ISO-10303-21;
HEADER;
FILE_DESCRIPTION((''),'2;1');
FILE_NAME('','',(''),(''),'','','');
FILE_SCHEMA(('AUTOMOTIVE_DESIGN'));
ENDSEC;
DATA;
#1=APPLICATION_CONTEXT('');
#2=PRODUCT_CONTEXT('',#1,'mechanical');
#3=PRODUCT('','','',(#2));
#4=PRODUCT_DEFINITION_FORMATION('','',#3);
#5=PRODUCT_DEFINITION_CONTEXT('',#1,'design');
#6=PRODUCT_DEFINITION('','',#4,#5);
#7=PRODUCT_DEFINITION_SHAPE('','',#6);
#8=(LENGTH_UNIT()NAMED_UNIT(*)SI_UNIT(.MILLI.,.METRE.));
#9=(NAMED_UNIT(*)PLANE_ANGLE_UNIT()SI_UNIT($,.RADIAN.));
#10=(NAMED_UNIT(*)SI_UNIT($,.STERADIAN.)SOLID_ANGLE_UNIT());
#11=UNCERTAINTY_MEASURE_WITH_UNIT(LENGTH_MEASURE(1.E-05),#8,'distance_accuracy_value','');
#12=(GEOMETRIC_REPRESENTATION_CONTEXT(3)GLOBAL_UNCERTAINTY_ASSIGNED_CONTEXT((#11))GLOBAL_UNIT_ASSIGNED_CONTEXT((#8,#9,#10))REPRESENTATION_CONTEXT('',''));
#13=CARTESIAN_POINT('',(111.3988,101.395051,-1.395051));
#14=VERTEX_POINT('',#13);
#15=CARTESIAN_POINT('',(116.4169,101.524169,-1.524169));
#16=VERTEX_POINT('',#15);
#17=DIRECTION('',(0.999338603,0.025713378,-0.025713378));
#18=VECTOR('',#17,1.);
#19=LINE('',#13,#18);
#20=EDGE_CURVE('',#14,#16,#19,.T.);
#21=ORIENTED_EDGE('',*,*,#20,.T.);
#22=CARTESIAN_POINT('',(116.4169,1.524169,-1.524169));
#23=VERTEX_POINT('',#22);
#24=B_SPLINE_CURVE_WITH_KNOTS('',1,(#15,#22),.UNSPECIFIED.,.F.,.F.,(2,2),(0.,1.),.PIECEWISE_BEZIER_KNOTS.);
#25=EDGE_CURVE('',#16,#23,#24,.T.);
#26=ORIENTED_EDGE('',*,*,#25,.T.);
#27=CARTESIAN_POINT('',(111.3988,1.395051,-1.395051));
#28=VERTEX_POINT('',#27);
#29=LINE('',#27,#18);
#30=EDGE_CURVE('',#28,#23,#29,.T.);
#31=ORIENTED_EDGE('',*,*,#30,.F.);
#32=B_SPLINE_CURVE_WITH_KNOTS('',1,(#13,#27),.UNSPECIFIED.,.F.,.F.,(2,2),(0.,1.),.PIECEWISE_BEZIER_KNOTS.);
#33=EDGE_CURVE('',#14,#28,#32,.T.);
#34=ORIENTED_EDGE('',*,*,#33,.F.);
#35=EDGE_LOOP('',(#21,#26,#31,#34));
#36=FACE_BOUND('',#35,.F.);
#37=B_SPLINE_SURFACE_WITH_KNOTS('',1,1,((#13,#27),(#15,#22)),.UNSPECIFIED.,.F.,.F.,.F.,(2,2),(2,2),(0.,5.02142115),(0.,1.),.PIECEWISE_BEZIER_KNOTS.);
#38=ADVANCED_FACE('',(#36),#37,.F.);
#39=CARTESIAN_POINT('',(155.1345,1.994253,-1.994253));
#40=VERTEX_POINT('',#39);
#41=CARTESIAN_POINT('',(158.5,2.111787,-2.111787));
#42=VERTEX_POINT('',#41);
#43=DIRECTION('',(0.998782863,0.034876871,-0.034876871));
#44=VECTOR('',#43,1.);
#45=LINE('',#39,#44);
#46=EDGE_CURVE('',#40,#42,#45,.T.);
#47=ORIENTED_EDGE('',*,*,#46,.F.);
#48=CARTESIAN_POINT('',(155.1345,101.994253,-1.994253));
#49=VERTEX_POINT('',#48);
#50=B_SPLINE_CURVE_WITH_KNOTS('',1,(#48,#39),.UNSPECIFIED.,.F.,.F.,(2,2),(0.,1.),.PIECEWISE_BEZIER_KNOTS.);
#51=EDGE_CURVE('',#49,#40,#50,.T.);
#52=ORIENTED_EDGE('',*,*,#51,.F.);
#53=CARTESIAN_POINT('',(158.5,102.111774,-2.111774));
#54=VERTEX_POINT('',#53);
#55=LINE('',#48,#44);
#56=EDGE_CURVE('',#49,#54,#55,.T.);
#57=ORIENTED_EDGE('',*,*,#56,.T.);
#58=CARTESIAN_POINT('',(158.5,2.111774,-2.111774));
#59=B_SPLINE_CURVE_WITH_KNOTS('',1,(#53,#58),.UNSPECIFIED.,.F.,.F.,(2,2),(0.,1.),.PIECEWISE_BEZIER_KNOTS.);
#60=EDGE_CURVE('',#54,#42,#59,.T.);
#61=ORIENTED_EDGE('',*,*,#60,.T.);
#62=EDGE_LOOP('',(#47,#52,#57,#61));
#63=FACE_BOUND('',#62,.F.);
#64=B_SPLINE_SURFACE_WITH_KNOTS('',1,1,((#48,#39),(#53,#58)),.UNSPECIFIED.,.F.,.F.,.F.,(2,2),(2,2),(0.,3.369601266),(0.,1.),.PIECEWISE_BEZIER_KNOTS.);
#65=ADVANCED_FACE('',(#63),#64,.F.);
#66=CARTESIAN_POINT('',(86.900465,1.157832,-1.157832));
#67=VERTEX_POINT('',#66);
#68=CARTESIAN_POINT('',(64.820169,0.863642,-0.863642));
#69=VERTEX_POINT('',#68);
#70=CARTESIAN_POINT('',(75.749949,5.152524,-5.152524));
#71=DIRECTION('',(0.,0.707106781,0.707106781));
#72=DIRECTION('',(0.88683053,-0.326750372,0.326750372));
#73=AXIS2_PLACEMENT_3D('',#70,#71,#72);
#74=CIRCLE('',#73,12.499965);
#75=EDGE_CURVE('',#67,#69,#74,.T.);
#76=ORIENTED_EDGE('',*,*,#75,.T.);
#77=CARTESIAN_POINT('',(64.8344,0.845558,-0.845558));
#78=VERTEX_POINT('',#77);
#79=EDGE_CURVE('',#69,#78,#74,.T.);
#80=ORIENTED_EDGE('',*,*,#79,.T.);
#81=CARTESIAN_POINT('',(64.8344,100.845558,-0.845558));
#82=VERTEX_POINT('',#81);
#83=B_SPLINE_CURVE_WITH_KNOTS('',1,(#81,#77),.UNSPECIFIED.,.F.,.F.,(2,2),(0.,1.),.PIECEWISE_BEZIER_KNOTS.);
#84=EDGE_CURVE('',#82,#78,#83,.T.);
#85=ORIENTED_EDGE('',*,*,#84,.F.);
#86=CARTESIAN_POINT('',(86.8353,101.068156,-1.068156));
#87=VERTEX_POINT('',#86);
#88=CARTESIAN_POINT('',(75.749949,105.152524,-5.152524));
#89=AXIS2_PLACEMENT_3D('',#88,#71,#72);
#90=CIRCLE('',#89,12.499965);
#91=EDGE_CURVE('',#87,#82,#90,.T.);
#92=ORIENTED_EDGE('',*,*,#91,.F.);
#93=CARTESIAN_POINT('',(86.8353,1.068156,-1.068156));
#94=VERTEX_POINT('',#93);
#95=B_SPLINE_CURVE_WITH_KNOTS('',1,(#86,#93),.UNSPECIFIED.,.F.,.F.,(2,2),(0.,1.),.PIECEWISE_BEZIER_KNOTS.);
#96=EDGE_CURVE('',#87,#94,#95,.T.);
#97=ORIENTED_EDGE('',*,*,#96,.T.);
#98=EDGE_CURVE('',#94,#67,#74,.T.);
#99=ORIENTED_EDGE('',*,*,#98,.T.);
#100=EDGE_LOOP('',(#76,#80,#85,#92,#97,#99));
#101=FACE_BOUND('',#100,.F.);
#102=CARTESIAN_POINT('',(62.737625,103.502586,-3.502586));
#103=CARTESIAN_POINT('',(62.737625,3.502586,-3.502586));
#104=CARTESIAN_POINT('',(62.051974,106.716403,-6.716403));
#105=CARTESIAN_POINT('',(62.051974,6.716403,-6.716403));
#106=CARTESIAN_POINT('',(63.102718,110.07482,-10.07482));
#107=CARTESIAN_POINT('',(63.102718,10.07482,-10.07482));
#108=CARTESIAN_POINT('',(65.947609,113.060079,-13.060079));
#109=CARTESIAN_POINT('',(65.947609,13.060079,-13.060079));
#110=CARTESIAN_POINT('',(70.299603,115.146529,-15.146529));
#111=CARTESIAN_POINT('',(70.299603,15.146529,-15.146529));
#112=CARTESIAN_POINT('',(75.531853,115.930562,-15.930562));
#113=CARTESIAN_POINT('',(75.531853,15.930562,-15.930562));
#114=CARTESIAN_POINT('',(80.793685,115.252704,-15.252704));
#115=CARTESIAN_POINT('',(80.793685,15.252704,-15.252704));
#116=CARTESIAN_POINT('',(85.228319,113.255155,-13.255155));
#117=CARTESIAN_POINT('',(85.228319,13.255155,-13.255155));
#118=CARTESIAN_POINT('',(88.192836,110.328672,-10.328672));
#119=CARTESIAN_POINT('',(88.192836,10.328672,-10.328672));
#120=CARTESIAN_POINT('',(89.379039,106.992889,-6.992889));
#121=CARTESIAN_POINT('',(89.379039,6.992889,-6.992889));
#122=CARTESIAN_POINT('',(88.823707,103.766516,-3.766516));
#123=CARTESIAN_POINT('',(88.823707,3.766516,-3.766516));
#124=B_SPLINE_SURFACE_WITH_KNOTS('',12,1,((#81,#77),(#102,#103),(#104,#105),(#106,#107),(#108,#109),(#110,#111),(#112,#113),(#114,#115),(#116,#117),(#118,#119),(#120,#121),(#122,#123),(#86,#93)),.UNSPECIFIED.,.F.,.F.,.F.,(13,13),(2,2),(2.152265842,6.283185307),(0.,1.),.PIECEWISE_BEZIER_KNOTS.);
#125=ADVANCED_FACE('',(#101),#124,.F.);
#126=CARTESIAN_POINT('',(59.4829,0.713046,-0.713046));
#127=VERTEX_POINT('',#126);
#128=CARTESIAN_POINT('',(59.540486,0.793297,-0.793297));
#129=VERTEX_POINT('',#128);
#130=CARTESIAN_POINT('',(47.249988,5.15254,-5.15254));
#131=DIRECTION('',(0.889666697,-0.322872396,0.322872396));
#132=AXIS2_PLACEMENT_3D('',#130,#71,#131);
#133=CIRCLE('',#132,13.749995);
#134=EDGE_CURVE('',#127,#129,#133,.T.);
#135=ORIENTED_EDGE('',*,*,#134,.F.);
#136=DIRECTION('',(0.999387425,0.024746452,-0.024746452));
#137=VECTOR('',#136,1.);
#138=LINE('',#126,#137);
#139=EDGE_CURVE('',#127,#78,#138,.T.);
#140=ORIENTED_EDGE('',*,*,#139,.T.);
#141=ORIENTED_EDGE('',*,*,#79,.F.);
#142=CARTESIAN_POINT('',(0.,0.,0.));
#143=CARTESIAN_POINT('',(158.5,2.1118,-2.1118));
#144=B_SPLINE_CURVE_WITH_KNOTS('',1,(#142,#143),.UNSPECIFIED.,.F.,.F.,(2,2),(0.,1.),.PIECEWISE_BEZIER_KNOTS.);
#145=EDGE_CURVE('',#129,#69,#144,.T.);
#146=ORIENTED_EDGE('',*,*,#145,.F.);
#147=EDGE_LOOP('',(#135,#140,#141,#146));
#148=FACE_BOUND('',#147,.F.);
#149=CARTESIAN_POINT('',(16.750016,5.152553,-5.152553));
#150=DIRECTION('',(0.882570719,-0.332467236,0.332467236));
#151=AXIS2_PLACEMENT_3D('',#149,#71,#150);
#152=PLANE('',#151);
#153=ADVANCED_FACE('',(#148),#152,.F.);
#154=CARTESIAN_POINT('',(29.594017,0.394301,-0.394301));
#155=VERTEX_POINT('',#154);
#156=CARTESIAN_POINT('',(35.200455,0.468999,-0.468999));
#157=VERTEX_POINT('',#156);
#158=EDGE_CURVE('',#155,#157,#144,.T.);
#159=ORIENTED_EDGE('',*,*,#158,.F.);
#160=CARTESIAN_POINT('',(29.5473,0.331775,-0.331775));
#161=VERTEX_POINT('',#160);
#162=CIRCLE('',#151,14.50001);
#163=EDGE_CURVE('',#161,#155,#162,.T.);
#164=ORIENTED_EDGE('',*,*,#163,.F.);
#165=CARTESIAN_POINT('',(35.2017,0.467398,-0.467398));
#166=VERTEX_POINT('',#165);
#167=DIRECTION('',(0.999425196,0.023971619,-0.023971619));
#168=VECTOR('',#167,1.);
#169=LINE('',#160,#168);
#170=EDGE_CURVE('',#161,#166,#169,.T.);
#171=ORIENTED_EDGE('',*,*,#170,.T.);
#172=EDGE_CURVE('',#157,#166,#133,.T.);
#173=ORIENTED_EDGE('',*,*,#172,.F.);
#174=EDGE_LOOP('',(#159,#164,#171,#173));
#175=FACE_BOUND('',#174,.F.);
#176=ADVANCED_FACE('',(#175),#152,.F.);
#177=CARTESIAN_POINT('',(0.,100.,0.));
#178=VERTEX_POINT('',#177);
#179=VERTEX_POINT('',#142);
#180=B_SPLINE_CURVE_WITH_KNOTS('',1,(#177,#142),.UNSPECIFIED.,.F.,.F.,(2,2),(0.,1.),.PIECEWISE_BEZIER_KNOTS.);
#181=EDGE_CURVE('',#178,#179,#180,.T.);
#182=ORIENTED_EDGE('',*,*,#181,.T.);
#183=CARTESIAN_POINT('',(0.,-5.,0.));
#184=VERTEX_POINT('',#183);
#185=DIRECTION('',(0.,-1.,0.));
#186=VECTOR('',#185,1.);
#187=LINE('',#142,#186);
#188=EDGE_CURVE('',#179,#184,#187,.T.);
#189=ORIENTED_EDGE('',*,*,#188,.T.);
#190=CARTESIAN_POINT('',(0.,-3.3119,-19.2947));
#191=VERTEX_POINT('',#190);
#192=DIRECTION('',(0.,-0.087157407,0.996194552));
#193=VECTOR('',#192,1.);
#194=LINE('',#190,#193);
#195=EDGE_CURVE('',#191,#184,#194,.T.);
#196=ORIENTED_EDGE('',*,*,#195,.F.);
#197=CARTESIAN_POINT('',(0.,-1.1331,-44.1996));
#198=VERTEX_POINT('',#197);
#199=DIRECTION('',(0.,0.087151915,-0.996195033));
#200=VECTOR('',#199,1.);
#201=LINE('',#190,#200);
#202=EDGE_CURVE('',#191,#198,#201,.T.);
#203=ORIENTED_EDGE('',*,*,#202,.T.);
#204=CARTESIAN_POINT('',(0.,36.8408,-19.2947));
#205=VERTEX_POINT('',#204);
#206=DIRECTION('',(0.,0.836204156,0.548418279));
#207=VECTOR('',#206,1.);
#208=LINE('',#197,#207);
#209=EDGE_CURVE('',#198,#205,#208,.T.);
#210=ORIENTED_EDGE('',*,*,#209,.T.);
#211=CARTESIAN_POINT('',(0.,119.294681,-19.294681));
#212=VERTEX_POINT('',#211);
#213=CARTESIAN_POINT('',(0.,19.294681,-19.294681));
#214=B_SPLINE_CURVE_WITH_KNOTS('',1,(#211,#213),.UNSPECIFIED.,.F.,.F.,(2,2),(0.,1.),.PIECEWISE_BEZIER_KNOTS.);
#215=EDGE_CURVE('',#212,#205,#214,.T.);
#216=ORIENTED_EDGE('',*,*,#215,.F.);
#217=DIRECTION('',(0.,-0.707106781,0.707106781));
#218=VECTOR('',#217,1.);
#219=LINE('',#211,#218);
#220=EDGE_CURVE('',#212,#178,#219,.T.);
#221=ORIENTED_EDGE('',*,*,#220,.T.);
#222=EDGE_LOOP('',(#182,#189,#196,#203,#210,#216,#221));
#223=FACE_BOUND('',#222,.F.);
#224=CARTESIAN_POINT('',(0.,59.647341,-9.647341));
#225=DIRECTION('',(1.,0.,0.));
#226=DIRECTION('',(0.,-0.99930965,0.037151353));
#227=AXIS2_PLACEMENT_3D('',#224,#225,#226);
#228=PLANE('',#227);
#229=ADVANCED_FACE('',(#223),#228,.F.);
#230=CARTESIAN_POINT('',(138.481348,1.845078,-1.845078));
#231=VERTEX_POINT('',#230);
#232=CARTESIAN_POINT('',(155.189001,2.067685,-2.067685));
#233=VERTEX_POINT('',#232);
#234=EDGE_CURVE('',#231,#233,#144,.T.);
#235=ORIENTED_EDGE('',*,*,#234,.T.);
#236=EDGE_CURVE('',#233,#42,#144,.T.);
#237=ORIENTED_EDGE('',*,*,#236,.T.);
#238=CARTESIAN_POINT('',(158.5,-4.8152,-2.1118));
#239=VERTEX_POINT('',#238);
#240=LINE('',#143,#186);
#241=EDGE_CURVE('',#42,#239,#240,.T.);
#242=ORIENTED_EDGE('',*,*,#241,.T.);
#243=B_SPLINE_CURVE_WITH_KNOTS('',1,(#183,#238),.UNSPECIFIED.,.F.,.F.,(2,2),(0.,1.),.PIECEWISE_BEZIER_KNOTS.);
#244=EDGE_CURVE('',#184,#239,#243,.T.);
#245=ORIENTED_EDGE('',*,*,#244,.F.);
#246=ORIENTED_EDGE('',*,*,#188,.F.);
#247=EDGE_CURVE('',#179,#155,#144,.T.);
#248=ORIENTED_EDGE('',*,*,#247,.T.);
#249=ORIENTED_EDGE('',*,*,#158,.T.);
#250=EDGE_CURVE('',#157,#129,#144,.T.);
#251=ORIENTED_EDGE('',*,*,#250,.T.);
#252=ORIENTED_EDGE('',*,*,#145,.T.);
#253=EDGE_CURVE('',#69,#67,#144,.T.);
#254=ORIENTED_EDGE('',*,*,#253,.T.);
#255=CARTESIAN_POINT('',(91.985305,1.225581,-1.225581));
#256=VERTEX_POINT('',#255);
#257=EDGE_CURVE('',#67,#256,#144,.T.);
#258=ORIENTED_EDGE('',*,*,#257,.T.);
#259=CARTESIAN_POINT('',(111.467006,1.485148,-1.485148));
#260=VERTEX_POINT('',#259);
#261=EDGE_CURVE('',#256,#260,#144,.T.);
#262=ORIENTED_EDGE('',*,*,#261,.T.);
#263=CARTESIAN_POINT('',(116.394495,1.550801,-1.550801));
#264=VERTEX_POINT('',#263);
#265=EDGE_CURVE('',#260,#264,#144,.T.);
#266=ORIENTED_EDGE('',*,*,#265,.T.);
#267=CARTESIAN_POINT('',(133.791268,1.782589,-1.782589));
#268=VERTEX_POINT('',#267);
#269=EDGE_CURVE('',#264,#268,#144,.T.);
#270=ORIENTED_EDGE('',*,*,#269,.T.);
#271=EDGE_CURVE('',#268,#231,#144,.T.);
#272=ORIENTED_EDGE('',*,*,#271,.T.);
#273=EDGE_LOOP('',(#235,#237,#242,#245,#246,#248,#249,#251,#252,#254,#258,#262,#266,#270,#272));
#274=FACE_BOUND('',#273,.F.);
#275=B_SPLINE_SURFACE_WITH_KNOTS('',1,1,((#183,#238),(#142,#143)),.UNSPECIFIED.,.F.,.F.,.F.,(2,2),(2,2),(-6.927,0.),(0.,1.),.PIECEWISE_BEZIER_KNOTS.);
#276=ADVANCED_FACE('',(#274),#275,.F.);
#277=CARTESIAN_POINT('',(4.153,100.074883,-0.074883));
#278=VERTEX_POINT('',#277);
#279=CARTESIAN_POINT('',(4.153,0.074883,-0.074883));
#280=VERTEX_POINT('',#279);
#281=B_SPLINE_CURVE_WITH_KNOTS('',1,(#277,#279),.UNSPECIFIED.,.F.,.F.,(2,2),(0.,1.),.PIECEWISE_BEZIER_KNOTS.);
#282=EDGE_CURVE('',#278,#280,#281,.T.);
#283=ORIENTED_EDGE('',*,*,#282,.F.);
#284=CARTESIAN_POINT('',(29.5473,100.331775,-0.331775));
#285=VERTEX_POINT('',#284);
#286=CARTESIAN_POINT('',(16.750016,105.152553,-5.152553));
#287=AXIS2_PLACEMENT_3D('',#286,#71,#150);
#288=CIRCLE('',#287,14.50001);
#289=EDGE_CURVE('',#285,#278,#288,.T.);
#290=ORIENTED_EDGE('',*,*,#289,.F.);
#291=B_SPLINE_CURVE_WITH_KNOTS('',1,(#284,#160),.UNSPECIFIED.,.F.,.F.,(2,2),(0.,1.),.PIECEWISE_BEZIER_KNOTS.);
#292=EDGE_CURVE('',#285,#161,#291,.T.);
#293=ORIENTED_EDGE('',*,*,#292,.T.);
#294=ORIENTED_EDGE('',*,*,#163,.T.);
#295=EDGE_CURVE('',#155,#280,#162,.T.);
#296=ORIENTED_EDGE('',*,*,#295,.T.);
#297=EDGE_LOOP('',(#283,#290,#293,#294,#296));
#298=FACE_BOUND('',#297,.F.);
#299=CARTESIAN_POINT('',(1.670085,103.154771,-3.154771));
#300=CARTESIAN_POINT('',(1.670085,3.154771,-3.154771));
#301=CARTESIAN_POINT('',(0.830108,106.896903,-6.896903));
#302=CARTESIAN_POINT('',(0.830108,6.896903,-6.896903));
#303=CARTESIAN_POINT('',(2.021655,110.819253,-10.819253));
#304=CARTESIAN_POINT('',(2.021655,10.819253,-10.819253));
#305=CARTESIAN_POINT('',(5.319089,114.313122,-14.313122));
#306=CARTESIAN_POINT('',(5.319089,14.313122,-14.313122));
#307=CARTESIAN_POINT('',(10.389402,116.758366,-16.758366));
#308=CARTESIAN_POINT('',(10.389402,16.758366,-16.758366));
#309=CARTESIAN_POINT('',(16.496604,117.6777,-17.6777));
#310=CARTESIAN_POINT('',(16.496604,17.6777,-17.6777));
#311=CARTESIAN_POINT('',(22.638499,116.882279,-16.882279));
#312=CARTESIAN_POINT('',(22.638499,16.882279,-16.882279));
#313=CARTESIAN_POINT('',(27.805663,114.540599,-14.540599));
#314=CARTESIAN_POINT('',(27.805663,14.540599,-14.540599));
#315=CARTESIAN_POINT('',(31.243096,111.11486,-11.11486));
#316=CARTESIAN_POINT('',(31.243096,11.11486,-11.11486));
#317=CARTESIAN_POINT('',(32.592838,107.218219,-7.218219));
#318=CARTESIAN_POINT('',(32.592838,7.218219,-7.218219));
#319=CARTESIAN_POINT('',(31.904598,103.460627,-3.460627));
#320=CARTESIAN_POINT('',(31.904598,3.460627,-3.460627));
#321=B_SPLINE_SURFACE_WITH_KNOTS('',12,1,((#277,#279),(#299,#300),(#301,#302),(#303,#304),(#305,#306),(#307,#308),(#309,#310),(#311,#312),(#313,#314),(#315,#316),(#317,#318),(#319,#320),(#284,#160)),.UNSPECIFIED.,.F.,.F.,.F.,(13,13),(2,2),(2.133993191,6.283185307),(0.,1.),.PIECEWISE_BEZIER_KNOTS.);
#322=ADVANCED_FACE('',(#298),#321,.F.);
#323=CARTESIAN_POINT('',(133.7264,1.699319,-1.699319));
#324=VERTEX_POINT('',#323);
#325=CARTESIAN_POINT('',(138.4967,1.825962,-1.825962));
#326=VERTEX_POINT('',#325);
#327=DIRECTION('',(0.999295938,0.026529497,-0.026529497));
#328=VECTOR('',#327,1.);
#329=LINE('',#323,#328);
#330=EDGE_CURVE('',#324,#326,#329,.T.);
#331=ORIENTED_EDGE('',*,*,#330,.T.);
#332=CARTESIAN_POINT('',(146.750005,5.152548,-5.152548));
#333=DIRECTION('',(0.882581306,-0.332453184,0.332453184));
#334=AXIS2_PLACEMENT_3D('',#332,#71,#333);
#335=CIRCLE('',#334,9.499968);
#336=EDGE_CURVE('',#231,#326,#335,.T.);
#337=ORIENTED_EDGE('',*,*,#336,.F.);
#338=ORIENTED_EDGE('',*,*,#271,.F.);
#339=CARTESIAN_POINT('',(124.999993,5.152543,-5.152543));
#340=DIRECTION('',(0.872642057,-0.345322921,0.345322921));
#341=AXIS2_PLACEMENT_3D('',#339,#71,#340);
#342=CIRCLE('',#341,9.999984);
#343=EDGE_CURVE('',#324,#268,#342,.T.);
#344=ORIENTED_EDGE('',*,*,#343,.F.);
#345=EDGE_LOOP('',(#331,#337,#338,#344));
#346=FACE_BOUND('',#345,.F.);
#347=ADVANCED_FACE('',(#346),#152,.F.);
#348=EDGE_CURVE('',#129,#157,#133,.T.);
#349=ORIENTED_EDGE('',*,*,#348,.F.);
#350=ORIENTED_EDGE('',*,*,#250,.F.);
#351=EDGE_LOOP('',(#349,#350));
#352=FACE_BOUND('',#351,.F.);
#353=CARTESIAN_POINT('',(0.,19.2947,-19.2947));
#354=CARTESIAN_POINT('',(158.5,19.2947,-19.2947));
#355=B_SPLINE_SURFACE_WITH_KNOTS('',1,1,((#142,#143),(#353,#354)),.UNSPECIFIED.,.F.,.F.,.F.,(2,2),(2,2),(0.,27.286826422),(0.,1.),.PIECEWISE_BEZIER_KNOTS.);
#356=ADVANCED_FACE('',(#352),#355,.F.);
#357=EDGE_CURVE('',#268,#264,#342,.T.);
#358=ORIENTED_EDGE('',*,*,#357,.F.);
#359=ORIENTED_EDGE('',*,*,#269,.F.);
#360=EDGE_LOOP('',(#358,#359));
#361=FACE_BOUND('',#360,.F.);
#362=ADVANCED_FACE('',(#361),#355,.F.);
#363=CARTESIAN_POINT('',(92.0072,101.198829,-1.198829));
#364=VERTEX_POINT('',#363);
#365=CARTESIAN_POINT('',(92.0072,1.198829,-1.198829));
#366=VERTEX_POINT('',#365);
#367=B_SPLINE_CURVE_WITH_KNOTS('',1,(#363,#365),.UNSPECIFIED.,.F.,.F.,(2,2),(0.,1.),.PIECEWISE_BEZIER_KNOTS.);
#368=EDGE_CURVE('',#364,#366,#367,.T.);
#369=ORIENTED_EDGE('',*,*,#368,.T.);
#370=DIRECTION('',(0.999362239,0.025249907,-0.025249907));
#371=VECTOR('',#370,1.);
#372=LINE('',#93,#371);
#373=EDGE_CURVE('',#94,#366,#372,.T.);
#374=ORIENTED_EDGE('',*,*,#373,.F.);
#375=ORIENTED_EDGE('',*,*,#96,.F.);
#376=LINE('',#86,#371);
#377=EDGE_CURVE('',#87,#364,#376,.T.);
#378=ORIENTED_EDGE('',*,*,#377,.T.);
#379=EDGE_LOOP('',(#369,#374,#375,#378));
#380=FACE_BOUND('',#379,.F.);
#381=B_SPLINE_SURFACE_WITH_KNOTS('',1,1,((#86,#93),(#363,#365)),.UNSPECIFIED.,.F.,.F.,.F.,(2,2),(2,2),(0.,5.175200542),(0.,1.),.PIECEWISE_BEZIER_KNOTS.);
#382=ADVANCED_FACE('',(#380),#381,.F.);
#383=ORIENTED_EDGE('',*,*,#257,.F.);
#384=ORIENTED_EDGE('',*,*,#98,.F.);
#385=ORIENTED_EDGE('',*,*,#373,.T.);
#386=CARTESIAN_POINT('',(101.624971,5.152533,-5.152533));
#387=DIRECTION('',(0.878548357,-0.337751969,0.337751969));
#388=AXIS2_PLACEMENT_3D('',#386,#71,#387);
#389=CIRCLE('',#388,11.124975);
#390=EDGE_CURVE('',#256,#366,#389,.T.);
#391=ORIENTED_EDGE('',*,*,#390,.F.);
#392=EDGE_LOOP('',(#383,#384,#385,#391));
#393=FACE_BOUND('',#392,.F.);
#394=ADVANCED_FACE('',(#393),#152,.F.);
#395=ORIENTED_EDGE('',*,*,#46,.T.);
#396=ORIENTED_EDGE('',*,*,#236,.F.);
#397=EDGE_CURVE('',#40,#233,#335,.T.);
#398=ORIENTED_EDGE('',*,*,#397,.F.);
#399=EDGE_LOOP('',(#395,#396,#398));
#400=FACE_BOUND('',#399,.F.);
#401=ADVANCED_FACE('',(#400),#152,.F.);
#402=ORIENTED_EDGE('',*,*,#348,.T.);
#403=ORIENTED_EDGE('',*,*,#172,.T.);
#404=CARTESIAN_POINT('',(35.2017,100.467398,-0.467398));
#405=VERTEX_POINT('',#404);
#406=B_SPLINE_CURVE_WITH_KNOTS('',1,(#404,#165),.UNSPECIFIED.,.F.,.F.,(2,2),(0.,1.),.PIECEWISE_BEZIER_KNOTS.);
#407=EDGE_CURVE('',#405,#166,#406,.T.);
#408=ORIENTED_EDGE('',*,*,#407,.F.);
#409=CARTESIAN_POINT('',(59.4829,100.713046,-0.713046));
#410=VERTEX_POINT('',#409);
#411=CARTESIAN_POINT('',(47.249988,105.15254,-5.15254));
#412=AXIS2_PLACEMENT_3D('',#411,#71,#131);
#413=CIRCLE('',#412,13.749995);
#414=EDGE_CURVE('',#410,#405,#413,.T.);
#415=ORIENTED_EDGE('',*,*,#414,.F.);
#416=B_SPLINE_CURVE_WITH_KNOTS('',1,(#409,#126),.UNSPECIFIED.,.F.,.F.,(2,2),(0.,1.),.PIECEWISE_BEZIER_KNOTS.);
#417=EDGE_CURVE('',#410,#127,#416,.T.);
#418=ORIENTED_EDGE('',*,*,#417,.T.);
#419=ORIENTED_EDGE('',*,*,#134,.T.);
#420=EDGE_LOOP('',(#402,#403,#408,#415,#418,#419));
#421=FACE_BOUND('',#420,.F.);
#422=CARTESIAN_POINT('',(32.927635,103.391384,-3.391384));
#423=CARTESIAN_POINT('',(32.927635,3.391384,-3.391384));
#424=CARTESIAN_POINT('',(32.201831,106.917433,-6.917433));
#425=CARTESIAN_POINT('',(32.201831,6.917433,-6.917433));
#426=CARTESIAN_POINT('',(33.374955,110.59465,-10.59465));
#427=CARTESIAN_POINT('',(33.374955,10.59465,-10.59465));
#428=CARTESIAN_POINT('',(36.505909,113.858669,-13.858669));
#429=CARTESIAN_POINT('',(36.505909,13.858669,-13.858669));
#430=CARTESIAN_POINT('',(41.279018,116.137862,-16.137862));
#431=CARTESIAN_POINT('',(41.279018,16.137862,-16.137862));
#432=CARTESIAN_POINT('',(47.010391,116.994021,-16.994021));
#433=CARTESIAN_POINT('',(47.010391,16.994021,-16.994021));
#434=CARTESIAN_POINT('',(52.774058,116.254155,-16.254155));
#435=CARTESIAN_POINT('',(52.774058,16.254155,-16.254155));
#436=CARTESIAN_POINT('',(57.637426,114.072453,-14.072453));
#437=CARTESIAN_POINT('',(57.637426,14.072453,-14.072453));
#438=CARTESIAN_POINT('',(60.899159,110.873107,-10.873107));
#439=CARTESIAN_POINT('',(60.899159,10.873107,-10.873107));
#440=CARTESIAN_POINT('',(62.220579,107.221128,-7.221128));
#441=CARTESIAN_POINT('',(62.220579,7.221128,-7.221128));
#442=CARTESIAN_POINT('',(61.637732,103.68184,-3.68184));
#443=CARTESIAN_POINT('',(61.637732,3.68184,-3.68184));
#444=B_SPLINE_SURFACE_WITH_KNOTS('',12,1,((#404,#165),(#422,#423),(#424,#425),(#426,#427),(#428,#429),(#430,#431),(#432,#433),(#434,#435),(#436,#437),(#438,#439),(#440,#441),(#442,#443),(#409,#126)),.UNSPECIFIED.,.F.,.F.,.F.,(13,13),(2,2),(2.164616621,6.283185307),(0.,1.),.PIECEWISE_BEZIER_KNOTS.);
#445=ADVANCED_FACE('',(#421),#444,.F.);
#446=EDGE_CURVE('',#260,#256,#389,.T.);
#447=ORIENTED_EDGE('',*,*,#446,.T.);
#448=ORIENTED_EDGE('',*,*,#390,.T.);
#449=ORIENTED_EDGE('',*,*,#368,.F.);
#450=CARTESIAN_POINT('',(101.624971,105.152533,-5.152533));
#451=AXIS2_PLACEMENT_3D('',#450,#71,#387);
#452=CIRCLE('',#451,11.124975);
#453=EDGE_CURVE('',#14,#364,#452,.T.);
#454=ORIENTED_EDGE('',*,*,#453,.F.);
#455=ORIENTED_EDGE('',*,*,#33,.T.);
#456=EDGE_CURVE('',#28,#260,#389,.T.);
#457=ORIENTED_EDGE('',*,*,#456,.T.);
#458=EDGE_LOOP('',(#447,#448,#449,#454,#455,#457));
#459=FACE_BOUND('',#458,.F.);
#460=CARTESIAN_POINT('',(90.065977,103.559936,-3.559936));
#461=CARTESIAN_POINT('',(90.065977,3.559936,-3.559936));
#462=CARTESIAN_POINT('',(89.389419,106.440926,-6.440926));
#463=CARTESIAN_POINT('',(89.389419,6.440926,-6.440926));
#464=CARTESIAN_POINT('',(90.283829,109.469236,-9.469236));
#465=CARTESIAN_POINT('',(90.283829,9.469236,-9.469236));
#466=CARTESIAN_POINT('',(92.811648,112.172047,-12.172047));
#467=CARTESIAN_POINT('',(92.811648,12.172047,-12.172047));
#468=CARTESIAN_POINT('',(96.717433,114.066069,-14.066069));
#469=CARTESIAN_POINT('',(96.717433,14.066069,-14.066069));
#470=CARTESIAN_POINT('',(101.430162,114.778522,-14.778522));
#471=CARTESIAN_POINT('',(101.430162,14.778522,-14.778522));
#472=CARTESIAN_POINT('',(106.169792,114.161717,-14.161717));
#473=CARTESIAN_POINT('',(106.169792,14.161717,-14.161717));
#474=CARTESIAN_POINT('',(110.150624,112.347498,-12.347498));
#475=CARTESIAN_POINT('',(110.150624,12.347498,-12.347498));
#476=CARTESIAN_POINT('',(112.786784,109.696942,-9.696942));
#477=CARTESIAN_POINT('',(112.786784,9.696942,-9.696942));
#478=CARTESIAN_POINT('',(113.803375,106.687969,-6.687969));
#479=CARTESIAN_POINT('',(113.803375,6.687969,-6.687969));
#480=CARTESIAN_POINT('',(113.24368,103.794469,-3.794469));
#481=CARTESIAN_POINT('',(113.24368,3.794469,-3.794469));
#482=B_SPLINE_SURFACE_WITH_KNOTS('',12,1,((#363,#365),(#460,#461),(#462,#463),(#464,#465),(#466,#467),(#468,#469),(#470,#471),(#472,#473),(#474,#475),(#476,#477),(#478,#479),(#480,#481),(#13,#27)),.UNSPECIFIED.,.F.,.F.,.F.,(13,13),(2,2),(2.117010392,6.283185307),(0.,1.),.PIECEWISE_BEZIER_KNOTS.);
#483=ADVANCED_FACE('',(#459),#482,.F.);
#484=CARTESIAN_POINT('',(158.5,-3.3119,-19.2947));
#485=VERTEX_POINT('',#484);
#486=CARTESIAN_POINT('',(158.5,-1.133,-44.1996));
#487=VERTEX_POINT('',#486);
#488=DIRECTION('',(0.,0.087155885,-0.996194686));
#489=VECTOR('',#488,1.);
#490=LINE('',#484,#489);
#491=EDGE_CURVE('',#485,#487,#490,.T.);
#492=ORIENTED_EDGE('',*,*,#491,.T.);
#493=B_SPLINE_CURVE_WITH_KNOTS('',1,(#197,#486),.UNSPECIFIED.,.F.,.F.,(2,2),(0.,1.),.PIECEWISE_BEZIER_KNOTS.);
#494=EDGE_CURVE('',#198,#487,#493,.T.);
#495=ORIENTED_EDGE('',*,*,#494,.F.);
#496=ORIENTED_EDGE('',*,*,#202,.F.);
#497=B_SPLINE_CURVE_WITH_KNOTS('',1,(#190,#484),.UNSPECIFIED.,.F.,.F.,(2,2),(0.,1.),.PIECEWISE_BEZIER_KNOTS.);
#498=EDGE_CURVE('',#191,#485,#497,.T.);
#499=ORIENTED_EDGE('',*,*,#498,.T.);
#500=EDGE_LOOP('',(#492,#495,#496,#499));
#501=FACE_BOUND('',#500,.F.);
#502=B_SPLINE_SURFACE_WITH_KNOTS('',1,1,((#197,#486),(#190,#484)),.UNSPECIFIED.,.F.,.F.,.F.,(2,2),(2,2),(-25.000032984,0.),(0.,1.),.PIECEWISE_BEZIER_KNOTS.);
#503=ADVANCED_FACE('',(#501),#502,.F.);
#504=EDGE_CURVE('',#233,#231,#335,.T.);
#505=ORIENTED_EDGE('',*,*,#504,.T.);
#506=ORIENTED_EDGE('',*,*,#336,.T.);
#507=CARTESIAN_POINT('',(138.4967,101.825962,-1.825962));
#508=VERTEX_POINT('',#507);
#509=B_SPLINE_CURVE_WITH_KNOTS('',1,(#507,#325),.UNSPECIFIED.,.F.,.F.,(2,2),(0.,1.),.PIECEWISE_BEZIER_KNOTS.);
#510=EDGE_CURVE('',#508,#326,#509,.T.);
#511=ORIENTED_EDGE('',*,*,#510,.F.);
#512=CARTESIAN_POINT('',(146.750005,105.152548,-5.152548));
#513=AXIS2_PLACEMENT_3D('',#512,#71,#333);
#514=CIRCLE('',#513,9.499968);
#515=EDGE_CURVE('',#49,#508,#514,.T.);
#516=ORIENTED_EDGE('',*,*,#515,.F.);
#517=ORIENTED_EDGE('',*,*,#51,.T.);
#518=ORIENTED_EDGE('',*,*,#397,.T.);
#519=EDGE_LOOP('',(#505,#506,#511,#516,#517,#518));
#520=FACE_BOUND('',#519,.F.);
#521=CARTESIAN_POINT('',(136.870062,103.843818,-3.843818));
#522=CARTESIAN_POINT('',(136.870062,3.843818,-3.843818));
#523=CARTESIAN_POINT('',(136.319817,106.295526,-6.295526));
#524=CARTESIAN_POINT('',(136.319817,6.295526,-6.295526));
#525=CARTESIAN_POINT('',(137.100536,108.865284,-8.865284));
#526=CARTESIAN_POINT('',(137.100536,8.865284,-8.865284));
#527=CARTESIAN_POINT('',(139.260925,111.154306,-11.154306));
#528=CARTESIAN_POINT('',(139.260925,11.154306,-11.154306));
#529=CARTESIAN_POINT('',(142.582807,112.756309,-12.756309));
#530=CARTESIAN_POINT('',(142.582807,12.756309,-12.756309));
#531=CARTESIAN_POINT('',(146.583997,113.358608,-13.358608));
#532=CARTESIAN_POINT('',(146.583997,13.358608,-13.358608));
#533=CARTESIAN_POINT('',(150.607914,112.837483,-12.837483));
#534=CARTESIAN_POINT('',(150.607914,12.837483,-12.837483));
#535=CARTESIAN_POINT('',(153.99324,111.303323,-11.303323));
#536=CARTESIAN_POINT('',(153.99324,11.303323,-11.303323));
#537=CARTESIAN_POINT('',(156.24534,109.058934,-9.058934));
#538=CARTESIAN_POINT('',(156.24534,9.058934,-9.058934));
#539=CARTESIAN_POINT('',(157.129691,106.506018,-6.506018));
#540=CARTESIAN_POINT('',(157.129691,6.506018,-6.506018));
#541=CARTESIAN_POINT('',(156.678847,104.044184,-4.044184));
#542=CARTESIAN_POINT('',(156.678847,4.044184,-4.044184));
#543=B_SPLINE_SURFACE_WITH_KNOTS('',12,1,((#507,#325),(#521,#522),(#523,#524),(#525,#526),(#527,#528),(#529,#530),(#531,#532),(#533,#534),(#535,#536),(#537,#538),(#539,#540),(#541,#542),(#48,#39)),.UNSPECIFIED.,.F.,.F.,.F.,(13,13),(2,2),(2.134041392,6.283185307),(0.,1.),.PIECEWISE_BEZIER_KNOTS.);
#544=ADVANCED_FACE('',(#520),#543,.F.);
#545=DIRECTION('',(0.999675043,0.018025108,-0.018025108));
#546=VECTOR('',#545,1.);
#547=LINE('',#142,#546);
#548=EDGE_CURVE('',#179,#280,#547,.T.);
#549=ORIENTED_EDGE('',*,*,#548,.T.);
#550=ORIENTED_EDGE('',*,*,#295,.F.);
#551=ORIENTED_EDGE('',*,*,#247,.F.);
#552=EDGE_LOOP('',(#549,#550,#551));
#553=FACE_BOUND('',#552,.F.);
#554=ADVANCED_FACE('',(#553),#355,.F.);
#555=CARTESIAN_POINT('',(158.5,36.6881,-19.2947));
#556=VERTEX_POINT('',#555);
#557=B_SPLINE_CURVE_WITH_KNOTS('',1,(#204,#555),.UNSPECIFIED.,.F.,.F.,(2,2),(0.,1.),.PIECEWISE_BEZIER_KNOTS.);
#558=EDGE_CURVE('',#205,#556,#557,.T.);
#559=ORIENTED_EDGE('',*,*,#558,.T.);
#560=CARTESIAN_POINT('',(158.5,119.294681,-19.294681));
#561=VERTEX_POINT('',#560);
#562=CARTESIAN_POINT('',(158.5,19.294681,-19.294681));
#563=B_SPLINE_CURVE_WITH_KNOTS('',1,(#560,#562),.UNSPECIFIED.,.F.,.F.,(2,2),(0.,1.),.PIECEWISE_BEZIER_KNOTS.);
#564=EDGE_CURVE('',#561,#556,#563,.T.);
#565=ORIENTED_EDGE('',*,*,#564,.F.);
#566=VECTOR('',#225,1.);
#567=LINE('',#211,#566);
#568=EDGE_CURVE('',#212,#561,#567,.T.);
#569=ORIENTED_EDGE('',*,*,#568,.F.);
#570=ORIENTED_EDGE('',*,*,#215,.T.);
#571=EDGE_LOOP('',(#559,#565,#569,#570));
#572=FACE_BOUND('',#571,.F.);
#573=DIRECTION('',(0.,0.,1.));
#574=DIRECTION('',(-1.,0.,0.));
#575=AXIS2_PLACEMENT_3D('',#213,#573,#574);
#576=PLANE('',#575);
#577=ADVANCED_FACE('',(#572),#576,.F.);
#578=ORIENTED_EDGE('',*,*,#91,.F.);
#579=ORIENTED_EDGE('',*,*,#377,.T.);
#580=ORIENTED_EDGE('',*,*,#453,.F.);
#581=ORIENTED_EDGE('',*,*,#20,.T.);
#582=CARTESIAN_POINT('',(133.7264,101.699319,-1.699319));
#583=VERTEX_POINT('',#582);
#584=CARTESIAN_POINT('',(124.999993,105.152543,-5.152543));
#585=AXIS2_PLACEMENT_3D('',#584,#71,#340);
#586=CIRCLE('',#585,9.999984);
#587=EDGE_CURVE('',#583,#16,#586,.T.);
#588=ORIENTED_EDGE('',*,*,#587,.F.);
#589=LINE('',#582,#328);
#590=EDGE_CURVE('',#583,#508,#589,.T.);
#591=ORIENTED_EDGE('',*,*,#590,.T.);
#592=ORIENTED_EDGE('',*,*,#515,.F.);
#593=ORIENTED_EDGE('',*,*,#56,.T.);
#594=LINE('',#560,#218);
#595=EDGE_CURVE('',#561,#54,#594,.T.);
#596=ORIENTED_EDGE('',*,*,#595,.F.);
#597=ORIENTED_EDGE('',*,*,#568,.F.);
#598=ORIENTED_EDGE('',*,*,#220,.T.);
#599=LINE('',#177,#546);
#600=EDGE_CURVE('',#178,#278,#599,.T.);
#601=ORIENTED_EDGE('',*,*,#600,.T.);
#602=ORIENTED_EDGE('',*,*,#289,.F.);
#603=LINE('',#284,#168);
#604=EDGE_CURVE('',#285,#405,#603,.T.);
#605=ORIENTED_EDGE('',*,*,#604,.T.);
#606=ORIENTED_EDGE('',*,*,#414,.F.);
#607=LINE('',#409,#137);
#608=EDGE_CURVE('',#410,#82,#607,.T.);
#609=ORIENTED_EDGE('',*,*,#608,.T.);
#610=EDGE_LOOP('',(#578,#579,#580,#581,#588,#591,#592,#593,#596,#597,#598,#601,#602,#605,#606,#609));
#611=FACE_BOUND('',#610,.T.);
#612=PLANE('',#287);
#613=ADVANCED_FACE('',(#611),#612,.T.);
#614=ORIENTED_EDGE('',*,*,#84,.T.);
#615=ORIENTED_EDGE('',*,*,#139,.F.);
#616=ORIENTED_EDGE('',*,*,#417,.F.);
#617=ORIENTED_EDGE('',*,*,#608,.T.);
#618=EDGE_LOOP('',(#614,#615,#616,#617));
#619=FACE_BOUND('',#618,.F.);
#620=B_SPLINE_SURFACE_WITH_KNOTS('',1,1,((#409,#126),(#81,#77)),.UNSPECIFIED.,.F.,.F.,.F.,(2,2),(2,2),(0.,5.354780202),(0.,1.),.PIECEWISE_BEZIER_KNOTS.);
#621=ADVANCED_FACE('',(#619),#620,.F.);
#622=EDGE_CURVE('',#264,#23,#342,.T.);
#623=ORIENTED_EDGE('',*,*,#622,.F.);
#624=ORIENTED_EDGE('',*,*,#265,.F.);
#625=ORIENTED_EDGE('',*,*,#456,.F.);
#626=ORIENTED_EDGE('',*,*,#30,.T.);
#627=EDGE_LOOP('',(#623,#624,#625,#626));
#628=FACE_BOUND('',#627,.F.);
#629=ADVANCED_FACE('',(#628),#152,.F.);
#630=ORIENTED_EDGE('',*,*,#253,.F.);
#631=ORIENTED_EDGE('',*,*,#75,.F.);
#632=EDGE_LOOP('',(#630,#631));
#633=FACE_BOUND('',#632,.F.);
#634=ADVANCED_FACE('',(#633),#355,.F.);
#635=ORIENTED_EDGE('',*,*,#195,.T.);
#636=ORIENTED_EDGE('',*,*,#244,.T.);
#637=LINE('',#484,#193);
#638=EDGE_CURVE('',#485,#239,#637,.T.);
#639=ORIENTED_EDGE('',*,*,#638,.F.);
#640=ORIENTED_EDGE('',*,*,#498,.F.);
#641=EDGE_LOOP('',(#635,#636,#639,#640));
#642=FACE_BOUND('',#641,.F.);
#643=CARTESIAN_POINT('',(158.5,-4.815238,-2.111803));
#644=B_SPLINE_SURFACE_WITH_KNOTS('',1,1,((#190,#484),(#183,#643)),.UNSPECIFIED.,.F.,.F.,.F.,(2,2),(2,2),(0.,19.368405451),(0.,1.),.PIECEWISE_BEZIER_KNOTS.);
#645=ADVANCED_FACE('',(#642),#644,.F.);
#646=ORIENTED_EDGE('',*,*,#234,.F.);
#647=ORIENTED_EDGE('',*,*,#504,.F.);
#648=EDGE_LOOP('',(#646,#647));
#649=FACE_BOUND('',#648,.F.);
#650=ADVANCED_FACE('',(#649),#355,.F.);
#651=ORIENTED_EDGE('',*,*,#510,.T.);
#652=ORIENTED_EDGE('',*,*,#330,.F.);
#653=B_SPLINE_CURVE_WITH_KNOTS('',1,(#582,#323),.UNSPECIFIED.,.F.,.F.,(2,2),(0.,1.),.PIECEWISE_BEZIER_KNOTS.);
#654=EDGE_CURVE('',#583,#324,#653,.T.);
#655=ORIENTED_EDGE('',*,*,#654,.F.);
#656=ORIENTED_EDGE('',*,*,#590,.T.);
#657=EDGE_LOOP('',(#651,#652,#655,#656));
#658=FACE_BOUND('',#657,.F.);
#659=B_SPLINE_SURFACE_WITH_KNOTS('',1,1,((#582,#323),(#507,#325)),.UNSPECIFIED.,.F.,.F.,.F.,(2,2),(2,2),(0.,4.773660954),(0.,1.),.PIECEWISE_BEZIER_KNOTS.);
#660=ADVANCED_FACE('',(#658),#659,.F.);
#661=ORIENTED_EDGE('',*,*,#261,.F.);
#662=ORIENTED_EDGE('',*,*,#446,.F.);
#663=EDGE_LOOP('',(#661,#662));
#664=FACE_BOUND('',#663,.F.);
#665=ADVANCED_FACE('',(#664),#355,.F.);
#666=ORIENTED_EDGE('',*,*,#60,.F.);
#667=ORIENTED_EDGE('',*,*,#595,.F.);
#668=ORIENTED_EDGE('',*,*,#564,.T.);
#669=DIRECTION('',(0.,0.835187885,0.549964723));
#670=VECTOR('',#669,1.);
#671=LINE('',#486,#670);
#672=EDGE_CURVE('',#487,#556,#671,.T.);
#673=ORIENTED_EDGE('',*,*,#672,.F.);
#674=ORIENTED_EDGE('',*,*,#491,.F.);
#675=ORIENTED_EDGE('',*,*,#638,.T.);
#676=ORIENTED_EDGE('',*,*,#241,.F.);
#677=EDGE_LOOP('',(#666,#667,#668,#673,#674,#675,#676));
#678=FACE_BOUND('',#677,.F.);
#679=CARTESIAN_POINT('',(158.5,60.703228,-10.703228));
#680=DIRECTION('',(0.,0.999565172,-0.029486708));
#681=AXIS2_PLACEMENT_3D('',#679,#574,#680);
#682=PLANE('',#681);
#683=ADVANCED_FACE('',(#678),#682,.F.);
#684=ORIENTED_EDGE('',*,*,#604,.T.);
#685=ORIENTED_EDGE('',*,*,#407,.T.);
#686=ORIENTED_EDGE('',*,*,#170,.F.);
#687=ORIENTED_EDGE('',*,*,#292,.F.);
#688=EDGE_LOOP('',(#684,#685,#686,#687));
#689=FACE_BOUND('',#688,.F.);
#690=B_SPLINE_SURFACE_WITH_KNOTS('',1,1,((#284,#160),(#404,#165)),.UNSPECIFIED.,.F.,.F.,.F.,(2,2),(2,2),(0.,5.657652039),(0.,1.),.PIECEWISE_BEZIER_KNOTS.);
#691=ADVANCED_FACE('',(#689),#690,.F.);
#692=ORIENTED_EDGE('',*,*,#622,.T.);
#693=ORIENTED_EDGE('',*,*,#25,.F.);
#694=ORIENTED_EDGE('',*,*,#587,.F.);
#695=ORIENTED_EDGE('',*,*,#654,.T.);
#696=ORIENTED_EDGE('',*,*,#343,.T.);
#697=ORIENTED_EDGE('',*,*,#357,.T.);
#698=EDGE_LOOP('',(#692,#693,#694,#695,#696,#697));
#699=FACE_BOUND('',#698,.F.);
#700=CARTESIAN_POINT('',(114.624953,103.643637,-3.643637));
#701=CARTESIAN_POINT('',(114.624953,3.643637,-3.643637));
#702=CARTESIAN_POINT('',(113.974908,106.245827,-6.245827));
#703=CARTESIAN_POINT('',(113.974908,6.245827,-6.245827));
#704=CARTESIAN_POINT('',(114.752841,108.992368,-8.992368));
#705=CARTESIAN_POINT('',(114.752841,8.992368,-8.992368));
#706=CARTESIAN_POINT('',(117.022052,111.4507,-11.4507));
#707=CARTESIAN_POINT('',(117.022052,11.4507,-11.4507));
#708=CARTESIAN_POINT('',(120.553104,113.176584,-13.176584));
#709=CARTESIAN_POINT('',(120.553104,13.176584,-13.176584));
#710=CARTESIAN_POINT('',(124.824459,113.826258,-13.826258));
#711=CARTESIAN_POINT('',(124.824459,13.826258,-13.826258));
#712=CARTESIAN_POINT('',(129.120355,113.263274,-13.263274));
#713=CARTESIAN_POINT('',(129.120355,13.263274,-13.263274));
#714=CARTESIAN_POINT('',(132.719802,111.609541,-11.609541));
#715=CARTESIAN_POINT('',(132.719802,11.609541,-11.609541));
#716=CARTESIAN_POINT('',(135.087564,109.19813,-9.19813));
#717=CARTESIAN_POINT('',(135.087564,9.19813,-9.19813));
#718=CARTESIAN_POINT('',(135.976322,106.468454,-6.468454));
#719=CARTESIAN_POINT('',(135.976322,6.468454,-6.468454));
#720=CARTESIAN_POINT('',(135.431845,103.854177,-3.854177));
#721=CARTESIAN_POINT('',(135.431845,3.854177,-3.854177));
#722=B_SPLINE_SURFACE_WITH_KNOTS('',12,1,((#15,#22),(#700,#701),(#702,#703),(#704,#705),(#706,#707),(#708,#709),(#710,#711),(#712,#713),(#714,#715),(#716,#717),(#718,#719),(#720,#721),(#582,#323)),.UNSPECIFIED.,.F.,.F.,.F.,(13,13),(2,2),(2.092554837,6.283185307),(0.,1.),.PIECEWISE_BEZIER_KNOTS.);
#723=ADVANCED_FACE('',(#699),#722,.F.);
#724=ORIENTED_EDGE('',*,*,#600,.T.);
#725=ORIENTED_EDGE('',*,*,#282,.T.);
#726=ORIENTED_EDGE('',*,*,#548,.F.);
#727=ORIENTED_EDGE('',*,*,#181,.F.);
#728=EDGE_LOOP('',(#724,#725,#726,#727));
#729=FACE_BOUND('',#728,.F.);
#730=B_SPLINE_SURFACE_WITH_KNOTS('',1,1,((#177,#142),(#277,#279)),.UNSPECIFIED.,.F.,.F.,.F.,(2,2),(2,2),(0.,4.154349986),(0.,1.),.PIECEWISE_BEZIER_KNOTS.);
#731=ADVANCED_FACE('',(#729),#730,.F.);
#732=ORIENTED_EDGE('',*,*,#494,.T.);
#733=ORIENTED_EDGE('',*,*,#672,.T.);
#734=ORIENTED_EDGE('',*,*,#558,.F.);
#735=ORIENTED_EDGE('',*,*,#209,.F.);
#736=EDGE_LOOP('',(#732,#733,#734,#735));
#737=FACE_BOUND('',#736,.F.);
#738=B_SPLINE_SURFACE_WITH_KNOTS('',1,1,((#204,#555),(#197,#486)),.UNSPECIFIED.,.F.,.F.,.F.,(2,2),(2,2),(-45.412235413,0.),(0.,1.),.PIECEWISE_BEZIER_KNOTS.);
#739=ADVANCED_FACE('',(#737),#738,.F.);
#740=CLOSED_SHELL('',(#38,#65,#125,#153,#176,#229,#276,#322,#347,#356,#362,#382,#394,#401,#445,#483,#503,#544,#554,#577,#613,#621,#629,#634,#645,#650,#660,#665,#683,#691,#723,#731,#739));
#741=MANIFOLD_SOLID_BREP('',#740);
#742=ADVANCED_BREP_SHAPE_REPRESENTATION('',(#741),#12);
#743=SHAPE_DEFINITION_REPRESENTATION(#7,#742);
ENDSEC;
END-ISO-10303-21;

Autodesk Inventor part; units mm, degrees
ref_plane "YZ Plane" through (0, 0, 0) normal (1, 0, 0) x (0, 1, 0)
ref_plane "XZ Plane" through (0, 0, 0) normal (0, 1, 0) x (-1, 0, 0)
sketch "Sketch1" plane through (0, 0, 0) normal (0, 0, 1) x (1, 0, 0)
  arc A0 (12.7973, -6.8176) -> (-12.597, -7.1809) centre (0, 0) ccw
  arc A1 (50.4829, -6.2785) -> (26.2017, -6.6259) centre (38.25, 0) ccw
  arc A2 (85.5853, -5.7763) -> (63.5844, -6.091) centre (74.5, 0) ccw
  arc A3 (117.8988, -5.314) -> (98.5072, -5.5914) centre (108.125, 0) ccw
  arc A4 (147.9764, -4.8837) -> (130.6669, -5.1313) centre (139.25, 0) ccw
  arc A5 (177.1345, -4.4665) -> (160.4967, -4.7045) centre (168.75, 0) ccw
  line L0 (-20, 20) -> (188.75, 20)
  line L1 (188.75, 20) -> (188.75, -4.3003)
  line L2 (-20, 20) -> (-20, -7.2868)
  line L3 (-20, -7.2868) -> (188.75, -4.3003)
  dimension "d0" = 29
  dimension "d1" = 27.5
  dimension "d2" = 25
  dimension "d3" = 22.25
  dimension "d4" = 20
  dimension "d5" = 19
  dimension "d6" = 38.25
  dimension "d7" = 36.25
  dimension "d8" = 33.625
  dimension "d9" = 31.125
  dimension "d10" = 29.5
  dimension "d11" = 0
  dimension "d12" = 0
  dimension "d13" = 0
  dimension "d14" = 0
  dimension "d15" = 0
  dimension "d20" = 20
  dimension "d22" = 20
  dimension "d23" = 20
  dimension "d24" = 7
  dimension "d25" = 4.586
sketch "Sketch4" plane through (0, 0, 0) normal (1, 0, 0) x (0, 1, 0)
  line L0 (0, 0) -> (29.9033, -29.9033)
  line L1 (0, 5.9807) -> (0, -35.884) projected
  point P0 (100, 0)
  dimension "d51" = 45
  dimension "d53" = 0
  dimension "d55" = 29.9033
  dimension "d98" = 100
ref_plane "Work Plane4" through (0, 100, 0) normal (0, 0.7071068, 0.7071068) x (1, 0, 0)
ref_plane "Work Plane3" through (-10, 0, 0) normal (0, 0.7071068, 0.7071068) x (1, 0, 0)
sketch "Sketch5" plane through (-10, 0, 0) normal (0, 0.7071068, 0.7071068) x (1, 0, 0)
  arc A0 (39.5473, 0.4692) -> (14.153, 0.1059) centre (26.75, 7.2868) ccw
  arc A1 (69.4829, 1.0084) -> (45.2017, 0.661) centre (57.25, 7.2868) ccw
  arc A2 (96.8353, 1.5106) -> (74.8344, 1.1958) centre (85.75, 7.2868) ccw
  arc A3 (121.3988, 1.9729) -> (102.0072, 1.6954) centre (111.625, 7.2868) ccw
  arc A4 (143.7264, 2.4032) -> (126.4169, 2.1555) centre (135, 7.2868) ccw
  arc A5 (165.1345, 2.8203) -> (148.4967, 2.5823) centre (156.75, 7.2868) ccw
  line L0 (10, 27.2868) -> (168.5, 27.2868)
  line L1 (168.5, 27.2868) -> (168.5, 2.9865)
  line L2 (10, 27.2868) -> (10, 0)
  line L3 (10, 0) -> (14.153, 0.1059)
  line L4 (39.5473, 0.4692) -> (45.2017, 0.661)
  line L5 (69.4829, 1.0084) -> (74.8344, 1.1958)
  line L6 (96.8353, 1.5106) -> (102.0072, 1.6954)
  line L7 (165.1345, 2.8203) -> (168.5, 2.9865)
  line L8 (121.3988, 1.9729) -> (126.4169, 2.1555)
  line L9 (143.7264, 2.4032) -> (148.4967, 2.5823)
  dimension "d56" = 29
  dimension "d57" = 27.5
  dimension "d58" = 25
  dimension "d59" = 22.25
  dimension "d60" = 20
  dimension "d61" = 19
  dimension "d62" = 30.5
  dimension "d63" = 28.5
  dimension "d64" = 25.875
  dimension "d65" = 23.375
  dimension "d66" = 21.75
  dimension "d67" = 0
  dimension "d68" = 0
  dimension "d69" = 0
  dimension "d70" = 0
  dimension "d71" = 0
  dimension "d72" = 20
  dimension "d73" = 11.75
  dimension "d74" = 16.75
sketch "Sketch6" plane through (0, 100, 0) normal (0, 0.7071068, 0.7071068) x (1, 0, 0)
  arc A0 (29.5473, 0.4692) -> (4.153, 0.1059) centre (16.75, 7.2868) ccw
  arc A1 (59.4829, 1.0084) -> (35.2017, 0.661) centre (47.25, 7.2868) ccw
  arc A2 (86.8353, 1.5106) -> (64.8344, 1.1958) centre (75.75, 7.2868) ccw
  arc A3 (111.3988, 1.9729) -> (92.0072, 1.6954) centre (101.625, 7.2868) ccw
  arc A4 (133.7264, 2.4032) -> (116.4169, 2.1555) centre (125, 7.2868) ccw
  arc A5 (155.1345, 2.8203) -> (138.4967, 2.5823) centre (146.75, 7.2868) ccw
  line L0 (0, 27.2868) -> (158.5, 27.2868)
  line L1 (158.5, 27.2868) -> (158.5, 2.9865)
  line L2 (0, 27.2868) -> (0, 0)
  line L3 (0, 0) -> (4.153, 0.1059)
  line L4 (29.5473, 0.4692) -> (35.2017, 0.661)
  line L5 (59.4829, 1.0084) -> (64.8344, 1.1958)
  line L6 (86.8353, 1.5106) -> (92.0072, 1.6954)
  line L7 (111.3988, 1.9729) -> (116.4169, 2.1555)
  line L8 (133.7264, 2.4032) -> (138.4967, 2.5823)
  line L9 (155.1345, 2.8203) -> (158.5, 2.9865)
  point P0 (0, -70.7107)
  dimension "d77" = 29
  dimension "d78" = 27.5
  dimension "d79" = 25
  dimension "d80" = 22.25
  dimension "d81" = 20
  dimension "d82" = 19
  dimension "d83" = 30.5
  dimension "d84" = 28.5
  dimension "d85" = 25.875
  dimension "d86" = 23.375
  dimension "d87" = 21.75
  dimension "d88" = 0
  dimension "d89" = 0
  dimension "d90" = 0
  dimension "d91" = 0
  dimension "d92" = 0
  dimension "d93" = 20
  dimension "d94" = 11.75
  dimension "d95" = 16.75
loft "Loft1" add profiles "Sketch6", "Sketch5"
sketch "Sketch7" plane through (0, 0, 0) normal (0, 1, 0) x (-1, 0, 0)
  line L0 (0, 0) -> (0, -19.2947) projected
  line L1 (0, -19.2947) -> (-158.5, -19.2947) projected
  line L2 (-158.5, -19.2947) -> (-158.5, -2.1118) projected
  line L3 (-158.5, -2.1118) -> (-155.1345, -1.9943) projected
  ellipse E0 centre (-146.75, -5.1526) end of major axis (-156.25, -5.1526) minor radius 6.7175 (-155.1345, -1.9943) -> (-138.4967, -1.826) ccw projected
  line L4 (-138.4967, -1.826) -> (-133.7264, -1.6993) projected
  ellipse E1 centre (-125, -5.1526) end of major axis (-135, -5.1526) minor radius 7.0711 (-133.7264, -1.6993) -> (-116.4169, -1.5242) ccw projected
  line L5 (-116.4169, -1.5242) -> (-111.3988, -1.395) projected
  ellipse E2 centre (-101.625, -5.1526) end of major axis (-112.75, -5.1526) minor radius 7.8666 (-111.3988, -1.395) -> (-92.0072, -1.1989) ccw projected
  line L6 (-92.0072, -1.1989) -> (-86.8353, -1.0681) projected
  ellipse E3 centre (-75.75, -5.1526) end of major axis (-88.25, -5.1526) minor radius 8.8388 (-86.8353, -1.0681) -> (-64.8344, -0.8456) ccw projected
  line L7 (-64.8344, -0.8456) -> (-59.4829, -0.713) projected
  ellipse E4 centre (-47.25, -5.1526) end of major axis (-61, -5.1526) minor radius 9.7227 (-59.4829, -0.713) -> (-35.2017, -0.4674) ccw projected
  line L8 (-35.2017, -0.4674) -> (-29.5473, -0.3318) projected
  ellipse E5 centre (-16.75, -5.1526) end of major axis (-31.25, -5.1526) minor radius 10.253 (-29.5473, -0.3318) -> (-4.153, -0.0749) ccw projected
  line L9 (-4.153, -0.0749) -> (0, 0) projected
  line L10 (0, 0) -> (0, -19.2947)
  line L11 (0, -19.2947) -> (-158.5, -19.2947)
  line L12 (-158.5, -19.2947) -> (-158.5, -2.1118)
  line L13 (-158.5, -2.1118) -> (0, 0)
  point P0 (0, 0)
sketch "Sketch10" plane through (0, 19.2947, -19.2947) normal (-1, 0, 0) x (0, 0, 1)
  line L0 (19.2947, 80.7053) -> (0, 100) projected
  line L1 (0, 100) -> (0, 0) projected
  line L2 (19.2947, -19.2947) -> (0, 0) projected
  line L3 (19.2947, 80.7053) -> (19.2947, -19.2947) projected
  line L4 (19.2947, -19.2947) -> (19.2947, -24.2947)
  line L5 (0, 0) -> (0, -22.6066)
  line L6 (0, -22.6066) -> (19.2947, -24.2947)
  line L7 (0, -22.6066) -> (-24.9049, -20.4278)
  line L8 (-24.9049, -20.4278) -> (0, 17.5461)
  line L9 (0, 100) -> (0, 0) projected
  line L10 (0, 17.5461) -> (0, 0)
  point P0 (19.2947, -19.2947)
  dimension "d106" = 5
  dimension "d111" = 85
  dimension "d113" = 25
  dimension "d114" = 40
sketch "Sketch11" plane through (158.5, 2.1118, -2.1118) normal (1, 0, 0) x (0, 0, -1)
  line L0 (17.1829, 117.1829) -> (0, 100) projected
  line L1 (0, 100) -> (0, 0) projected
  line L2 (17.1829, 17.1829) -> (0, 0) projected
  line L3 (17.1829, 117.1829) -> (17.1829, 17.1829) projected
  line L4 (17.1829, 17.1829) -> (0, 0)
  line L5 (10.1119, 10.1119) -> (-0.5876, -0.5876) projected
  line L6 (17.1829, -5.4237) -> (-2.1118, -7.1118) projected
  line L7 (0, 0) -> (0, -6.927)
  line L8 (17.1829, -5.4237) -> (0, -6.927)
  line L9 (17.1829, -5.4237) -> (17.1829, 17.1829)
  line L10 (0, -6.927) -> (17.1829, -5.4237)
  line L11 (17.1829, -5.4237) -> (42.0878, -3.2448)
  line L12 (42.0878, -3.2448) -> (17.1829, 34.5763)
  line L13 (17.1829, 117.1829) -> (17.1829, 17.1829) projected
  line L14 (17.1829, 17.1829) -> (17.1829, 34.5763)
  point P0 (-2.1118, -2.1118)
  point P1 (17.1829, -7.1118)
  point P2 (-0.4125, -0.4125)
  dimension "d115" = 25
  dimension "d116" = 40
loft "Loft3" add profiles "Sketch10", "Sketch11" contours L4 L6 L5 L2 | L1 L5 L7 L8 / L12 L11 L9 L3 | L2 L9 L6 L7
properties part number "coin_holder"
